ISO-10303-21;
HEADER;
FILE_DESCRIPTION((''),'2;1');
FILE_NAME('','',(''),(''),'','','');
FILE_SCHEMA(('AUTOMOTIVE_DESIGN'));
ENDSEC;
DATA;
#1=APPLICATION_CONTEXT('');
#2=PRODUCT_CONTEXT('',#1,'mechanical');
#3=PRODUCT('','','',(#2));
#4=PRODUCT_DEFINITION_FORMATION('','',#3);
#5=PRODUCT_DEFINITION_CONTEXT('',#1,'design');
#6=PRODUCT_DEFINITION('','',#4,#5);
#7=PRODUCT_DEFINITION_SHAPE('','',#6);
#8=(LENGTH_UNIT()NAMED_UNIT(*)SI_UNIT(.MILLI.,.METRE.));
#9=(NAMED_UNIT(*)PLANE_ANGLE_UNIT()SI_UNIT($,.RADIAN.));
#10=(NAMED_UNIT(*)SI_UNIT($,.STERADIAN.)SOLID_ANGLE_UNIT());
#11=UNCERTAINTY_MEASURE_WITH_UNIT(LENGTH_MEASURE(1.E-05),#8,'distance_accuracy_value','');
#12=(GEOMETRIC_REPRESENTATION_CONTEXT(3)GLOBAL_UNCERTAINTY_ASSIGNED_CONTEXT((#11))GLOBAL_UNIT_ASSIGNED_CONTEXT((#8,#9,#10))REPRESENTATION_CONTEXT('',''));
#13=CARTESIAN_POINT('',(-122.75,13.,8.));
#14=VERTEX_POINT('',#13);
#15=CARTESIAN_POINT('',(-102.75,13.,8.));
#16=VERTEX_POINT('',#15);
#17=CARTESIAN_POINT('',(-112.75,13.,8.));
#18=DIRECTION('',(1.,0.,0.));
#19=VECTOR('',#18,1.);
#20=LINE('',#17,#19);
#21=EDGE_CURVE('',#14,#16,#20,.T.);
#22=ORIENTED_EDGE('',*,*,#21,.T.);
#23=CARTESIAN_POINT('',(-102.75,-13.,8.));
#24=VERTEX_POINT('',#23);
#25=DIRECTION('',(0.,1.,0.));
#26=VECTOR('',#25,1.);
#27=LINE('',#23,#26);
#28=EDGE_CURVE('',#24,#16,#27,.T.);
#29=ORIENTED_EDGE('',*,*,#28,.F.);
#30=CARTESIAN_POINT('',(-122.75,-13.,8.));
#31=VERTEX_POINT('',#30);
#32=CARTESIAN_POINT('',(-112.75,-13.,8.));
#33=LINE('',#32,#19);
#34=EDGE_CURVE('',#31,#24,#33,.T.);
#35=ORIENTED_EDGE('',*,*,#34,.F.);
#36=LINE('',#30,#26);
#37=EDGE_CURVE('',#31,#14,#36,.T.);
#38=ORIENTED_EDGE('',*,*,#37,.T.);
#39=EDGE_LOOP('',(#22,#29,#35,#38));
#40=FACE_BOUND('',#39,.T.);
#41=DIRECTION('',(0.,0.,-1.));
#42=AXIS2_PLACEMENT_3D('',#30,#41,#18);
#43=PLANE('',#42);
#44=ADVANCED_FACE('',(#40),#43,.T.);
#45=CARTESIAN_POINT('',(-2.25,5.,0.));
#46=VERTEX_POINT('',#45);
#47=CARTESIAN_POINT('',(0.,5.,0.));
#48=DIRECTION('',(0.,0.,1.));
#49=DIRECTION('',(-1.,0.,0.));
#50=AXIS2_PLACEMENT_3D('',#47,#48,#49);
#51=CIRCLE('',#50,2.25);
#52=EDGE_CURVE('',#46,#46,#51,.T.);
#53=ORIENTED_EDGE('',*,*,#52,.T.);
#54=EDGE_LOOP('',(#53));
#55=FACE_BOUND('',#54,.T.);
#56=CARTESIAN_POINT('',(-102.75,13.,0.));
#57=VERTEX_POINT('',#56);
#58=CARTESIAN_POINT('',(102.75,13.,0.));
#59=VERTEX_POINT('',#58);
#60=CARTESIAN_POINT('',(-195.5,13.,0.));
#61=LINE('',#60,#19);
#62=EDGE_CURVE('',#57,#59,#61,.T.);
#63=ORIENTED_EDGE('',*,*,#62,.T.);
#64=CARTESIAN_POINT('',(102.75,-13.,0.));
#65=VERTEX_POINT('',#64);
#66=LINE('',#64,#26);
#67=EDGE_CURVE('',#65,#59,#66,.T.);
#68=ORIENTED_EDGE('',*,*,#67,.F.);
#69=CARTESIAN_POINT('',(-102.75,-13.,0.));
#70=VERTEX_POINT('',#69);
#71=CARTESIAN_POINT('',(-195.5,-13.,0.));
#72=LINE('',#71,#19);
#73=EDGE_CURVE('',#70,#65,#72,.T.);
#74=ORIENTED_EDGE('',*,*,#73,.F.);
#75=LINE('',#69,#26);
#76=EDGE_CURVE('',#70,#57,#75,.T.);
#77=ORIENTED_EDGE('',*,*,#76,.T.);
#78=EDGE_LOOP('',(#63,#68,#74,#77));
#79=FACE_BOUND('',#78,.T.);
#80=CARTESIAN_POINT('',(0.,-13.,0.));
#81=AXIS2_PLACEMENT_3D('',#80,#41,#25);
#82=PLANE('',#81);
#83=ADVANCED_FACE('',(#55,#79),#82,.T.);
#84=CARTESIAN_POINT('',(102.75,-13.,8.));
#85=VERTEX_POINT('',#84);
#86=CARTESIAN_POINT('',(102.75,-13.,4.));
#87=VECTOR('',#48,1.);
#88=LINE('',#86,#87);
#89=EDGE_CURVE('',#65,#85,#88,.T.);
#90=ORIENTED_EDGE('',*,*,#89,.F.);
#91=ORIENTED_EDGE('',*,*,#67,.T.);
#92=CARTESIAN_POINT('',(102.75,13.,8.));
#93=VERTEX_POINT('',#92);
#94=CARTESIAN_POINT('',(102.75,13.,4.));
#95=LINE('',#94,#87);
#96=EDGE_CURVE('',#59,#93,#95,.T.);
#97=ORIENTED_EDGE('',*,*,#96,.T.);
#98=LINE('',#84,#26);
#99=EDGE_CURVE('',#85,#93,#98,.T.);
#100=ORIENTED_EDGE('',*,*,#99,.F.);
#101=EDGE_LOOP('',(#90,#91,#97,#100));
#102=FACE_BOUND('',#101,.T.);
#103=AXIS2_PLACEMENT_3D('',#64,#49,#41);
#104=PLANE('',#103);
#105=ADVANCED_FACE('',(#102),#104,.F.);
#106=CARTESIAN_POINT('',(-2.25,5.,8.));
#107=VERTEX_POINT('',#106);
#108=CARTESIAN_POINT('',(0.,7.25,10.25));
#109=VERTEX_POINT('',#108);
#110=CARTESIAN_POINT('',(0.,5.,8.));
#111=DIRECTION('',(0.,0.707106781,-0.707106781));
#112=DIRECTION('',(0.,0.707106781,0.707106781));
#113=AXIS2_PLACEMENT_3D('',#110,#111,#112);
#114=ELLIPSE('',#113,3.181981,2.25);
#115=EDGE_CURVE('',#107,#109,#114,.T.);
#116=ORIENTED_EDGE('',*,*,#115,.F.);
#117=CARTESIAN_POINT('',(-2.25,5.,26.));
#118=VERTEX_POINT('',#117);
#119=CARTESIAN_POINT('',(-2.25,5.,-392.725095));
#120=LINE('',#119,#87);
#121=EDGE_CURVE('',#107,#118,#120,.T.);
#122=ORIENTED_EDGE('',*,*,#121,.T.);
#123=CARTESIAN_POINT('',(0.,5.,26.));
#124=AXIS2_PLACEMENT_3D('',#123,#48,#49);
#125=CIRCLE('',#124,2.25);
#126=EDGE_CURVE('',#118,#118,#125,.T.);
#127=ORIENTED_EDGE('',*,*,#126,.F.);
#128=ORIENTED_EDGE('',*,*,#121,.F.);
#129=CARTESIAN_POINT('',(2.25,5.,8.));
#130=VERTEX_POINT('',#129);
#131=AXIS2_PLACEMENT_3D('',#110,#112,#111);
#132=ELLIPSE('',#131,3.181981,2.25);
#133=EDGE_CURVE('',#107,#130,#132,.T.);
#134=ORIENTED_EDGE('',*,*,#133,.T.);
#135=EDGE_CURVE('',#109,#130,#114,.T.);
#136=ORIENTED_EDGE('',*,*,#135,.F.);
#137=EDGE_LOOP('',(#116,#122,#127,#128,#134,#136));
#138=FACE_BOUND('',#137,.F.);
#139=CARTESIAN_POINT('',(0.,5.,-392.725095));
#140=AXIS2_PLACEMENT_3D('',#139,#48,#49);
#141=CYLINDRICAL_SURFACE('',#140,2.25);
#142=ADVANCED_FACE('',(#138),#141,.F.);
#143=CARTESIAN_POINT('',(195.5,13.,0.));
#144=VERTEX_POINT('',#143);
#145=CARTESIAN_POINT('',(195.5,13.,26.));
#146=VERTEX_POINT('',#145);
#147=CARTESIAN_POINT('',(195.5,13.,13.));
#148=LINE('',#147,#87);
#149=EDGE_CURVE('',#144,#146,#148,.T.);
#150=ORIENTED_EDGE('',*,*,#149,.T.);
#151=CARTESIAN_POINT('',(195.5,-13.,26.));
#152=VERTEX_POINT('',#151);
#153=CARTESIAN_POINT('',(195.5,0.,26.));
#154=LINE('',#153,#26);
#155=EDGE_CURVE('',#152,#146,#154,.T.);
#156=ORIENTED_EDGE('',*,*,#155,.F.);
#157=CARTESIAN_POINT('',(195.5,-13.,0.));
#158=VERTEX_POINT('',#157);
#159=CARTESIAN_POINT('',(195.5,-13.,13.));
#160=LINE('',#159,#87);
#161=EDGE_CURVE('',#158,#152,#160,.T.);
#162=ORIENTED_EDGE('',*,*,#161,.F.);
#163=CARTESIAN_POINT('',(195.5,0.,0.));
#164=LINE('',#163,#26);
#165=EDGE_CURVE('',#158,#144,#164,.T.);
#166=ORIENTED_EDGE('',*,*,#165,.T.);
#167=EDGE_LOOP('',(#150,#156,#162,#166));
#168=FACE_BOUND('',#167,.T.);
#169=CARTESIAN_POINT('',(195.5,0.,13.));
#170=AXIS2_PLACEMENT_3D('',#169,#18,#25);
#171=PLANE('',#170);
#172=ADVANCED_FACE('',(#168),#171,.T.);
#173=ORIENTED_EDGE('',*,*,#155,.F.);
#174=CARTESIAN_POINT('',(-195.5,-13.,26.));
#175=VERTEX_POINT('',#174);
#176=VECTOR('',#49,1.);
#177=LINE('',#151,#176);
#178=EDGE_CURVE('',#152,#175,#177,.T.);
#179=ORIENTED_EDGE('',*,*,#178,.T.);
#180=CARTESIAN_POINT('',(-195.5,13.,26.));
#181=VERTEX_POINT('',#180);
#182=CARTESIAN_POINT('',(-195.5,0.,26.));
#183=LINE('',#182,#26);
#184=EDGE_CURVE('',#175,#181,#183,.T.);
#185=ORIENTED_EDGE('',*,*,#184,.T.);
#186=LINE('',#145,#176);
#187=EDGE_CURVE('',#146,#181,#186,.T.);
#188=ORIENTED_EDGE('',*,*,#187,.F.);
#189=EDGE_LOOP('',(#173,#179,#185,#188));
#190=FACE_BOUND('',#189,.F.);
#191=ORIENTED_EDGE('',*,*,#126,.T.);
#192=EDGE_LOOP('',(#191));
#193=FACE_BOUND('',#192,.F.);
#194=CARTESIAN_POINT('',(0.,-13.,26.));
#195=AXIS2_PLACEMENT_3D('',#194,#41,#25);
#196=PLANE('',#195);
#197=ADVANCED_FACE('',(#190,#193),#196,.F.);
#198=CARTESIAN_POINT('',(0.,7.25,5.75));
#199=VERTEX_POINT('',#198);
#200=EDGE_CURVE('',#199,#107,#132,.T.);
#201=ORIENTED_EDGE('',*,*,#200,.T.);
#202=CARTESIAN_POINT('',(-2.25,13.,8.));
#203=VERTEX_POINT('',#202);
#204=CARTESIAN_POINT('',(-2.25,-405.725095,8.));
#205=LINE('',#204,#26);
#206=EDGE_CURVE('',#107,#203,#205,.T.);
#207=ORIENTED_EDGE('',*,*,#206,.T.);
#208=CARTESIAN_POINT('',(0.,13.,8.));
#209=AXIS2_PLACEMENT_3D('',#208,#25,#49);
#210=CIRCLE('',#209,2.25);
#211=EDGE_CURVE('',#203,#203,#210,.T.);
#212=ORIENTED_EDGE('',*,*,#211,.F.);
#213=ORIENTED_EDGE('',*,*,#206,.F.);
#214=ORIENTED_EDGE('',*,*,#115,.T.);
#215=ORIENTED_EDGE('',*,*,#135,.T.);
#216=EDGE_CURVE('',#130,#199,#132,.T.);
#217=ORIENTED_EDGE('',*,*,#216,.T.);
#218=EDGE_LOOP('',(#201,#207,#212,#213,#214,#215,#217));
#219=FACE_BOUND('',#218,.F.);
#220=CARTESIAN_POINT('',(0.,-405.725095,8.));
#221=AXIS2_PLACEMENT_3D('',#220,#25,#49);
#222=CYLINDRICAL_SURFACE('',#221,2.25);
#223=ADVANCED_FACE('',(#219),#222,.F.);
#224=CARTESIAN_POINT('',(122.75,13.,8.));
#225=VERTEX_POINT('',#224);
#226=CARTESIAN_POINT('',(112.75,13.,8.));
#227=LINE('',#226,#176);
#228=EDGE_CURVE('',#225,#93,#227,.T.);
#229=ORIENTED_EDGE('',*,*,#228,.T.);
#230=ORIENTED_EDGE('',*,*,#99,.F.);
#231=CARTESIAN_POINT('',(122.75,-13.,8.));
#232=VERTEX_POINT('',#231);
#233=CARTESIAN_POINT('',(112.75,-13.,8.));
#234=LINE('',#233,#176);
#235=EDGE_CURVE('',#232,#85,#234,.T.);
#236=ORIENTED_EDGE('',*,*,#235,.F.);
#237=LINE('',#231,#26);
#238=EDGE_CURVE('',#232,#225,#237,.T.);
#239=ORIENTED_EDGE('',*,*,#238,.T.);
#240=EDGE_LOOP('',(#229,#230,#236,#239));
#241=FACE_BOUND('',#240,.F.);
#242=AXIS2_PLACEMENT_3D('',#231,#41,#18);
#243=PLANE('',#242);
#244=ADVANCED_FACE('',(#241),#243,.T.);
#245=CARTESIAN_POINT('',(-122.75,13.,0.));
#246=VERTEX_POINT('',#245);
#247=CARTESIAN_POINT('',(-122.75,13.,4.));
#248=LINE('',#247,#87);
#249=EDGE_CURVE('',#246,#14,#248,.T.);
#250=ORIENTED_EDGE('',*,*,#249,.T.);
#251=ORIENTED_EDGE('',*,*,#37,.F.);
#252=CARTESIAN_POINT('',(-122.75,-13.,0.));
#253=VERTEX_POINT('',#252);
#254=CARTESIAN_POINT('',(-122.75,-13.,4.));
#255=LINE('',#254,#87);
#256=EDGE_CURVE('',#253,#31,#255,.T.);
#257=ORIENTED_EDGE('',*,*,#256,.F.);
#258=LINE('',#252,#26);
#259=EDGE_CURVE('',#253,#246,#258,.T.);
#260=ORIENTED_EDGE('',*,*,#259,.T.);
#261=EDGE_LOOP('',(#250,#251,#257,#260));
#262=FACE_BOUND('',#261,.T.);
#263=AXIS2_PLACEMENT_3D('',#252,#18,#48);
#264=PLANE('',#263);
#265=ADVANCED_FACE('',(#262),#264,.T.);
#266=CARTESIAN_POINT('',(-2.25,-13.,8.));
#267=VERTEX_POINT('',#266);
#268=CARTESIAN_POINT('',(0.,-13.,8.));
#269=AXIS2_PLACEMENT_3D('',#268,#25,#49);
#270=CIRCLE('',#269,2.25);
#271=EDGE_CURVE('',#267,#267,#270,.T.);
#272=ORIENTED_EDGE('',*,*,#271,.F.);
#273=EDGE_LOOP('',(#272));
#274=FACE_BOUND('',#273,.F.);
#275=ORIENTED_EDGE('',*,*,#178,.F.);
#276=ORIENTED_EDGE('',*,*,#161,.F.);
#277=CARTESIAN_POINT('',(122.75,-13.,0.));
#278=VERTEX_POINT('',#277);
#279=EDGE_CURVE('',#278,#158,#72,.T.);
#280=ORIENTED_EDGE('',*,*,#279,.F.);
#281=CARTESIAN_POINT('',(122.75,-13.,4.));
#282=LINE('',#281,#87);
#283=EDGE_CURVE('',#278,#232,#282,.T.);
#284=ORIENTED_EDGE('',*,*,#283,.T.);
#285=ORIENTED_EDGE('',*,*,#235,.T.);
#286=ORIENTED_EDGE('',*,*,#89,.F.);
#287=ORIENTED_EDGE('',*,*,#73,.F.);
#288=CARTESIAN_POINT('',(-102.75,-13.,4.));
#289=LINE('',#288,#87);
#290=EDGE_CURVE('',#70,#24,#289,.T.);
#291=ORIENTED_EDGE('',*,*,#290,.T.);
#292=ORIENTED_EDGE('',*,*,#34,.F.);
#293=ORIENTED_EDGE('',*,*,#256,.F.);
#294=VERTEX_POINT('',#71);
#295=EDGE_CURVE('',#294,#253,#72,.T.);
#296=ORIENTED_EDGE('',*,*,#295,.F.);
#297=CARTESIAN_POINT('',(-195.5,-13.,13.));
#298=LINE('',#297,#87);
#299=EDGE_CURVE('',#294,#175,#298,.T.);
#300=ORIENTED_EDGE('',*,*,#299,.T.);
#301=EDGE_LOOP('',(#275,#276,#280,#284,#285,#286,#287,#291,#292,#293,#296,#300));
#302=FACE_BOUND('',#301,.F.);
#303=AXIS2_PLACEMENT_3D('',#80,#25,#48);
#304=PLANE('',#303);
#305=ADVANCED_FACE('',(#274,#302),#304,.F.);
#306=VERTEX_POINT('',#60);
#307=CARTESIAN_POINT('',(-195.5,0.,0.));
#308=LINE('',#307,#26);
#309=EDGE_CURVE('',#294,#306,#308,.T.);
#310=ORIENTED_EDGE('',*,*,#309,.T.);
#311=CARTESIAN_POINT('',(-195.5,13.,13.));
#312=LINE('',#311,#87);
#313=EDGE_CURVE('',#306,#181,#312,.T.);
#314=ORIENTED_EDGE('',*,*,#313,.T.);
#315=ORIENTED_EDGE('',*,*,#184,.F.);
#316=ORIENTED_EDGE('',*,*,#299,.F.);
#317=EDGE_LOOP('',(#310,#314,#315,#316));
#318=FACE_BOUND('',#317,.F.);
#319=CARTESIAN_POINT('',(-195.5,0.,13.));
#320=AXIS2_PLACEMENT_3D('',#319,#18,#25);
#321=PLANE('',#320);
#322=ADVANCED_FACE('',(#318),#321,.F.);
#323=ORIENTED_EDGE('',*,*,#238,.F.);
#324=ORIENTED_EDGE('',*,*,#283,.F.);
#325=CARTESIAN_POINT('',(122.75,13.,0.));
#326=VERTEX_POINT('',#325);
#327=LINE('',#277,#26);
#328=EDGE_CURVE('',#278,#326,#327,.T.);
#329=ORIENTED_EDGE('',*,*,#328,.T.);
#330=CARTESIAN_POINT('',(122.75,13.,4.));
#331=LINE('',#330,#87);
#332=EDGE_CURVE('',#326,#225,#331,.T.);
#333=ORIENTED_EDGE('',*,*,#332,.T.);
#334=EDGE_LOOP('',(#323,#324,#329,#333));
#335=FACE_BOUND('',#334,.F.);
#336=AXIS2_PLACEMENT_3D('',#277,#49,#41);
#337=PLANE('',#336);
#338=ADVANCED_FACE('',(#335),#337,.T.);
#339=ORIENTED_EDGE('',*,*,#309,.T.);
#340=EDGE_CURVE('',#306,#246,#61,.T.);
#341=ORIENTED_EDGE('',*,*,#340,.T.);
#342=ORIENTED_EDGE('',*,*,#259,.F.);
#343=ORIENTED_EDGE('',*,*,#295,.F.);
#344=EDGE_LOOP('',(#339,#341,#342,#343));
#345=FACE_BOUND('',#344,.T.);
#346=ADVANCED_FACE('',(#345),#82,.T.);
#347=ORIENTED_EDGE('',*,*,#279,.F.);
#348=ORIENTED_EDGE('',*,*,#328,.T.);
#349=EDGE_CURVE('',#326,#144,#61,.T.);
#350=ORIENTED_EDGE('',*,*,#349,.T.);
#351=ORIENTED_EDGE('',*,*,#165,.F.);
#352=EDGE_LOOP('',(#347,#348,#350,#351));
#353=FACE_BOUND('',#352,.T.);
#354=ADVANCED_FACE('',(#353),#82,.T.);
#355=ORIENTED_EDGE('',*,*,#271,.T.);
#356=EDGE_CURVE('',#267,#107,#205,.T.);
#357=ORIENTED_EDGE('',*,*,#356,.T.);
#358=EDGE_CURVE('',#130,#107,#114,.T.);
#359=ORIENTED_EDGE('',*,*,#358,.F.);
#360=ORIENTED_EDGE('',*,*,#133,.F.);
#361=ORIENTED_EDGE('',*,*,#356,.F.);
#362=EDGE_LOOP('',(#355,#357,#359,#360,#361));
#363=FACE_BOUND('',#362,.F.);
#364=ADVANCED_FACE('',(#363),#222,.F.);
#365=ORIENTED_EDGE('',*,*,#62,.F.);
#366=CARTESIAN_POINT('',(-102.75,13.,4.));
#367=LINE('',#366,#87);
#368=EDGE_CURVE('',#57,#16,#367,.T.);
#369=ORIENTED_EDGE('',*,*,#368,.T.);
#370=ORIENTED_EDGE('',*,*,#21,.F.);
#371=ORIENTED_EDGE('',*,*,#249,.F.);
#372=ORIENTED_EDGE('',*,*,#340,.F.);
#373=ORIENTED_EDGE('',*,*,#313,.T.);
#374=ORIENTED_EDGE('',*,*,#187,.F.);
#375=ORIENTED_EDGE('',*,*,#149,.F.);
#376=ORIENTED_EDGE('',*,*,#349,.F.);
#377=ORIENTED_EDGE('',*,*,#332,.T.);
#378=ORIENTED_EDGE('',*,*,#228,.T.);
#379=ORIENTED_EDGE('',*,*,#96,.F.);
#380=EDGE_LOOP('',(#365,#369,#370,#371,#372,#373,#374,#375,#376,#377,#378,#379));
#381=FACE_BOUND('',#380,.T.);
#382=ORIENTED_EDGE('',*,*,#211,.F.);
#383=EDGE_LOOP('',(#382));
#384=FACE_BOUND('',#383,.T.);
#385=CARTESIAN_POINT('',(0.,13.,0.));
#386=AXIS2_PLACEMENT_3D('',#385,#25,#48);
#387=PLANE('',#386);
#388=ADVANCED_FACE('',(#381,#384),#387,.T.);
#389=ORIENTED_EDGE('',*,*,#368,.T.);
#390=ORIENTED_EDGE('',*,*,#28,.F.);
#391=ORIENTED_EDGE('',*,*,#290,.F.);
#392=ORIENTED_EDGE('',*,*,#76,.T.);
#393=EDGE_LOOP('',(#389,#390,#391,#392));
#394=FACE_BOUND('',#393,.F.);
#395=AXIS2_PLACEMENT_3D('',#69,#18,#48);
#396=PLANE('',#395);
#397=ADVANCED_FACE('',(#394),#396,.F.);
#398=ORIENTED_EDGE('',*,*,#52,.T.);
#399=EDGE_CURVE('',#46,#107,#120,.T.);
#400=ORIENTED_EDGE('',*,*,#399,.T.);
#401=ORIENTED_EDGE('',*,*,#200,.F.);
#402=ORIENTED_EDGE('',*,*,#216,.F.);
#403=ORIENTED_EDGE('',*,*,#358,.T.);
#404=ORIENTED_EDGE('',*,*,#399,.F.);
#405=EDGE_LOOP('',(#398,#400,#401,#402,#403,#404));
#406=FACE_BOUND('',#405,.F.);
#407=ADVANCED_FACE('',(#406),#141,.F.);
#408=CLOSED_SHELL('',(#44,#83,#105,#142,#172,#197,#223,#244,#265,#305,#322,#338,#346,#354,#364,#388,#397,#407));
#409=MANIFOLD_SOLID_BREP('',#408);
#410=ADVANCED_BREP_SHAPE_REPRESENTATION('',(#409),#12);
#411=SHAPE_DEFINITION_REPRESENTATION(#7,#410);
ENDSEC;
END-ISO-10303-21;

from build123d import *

# Parameters (mm, degrees)
F0_W     = 26
F0_H     = 26
F1_DEPTH = 195.5
F4_D     = 4.5
F6_D     = 4.5
F7_W     = 20
F7_H     = 8
F8_DEPTH = 26


# Not quite as in the source:
# - a pattern or mirror of a feature is missing from the dataset's text; its kind, count and spacing are read off the source's solid


with BuildPart() as f1:
    # F0 (on Right) → F1 (new body, symmetric)
    with BuildSketch(Plane.YZ):
        with Locations((0, 13)):
            Rectangle(F0_W, F0_H)
    extrude(amount=F1_DEPTH, both=True)

    # F4 (through all)
    with Locations(Plane.XZ.offset(13)):
        with Locations((0, 8)):
            Hole(F4_D / 2)

    # F6 (through all)
    with Locations(Plane(origin=(0, 0, 0), x_dir=(1, 0, 0), z_dir=(0, 0, -1))):
        with Locations((0, -5)):
            Hole(F6_D / 2)

    # F7 (on face) → F8 (cut, through all)
    with BuildSketch(Plane.XZ.offset(13)):
        with Locations((-112.75, 4)):
            Rectangle(F7_W, F7_H)
    f8 = extrude(amount=-F8_DEPTH, mode=Mode.SUBTRACT)

    # F8_copies: F8 across plane
    add(f8.mirror(Plane(origin=(0, 0, 0), x_dir=(0, 0, 1), z_dir=(1, 0, 0))), mode=Mode.SUBTRACT)


solid = f1.part
